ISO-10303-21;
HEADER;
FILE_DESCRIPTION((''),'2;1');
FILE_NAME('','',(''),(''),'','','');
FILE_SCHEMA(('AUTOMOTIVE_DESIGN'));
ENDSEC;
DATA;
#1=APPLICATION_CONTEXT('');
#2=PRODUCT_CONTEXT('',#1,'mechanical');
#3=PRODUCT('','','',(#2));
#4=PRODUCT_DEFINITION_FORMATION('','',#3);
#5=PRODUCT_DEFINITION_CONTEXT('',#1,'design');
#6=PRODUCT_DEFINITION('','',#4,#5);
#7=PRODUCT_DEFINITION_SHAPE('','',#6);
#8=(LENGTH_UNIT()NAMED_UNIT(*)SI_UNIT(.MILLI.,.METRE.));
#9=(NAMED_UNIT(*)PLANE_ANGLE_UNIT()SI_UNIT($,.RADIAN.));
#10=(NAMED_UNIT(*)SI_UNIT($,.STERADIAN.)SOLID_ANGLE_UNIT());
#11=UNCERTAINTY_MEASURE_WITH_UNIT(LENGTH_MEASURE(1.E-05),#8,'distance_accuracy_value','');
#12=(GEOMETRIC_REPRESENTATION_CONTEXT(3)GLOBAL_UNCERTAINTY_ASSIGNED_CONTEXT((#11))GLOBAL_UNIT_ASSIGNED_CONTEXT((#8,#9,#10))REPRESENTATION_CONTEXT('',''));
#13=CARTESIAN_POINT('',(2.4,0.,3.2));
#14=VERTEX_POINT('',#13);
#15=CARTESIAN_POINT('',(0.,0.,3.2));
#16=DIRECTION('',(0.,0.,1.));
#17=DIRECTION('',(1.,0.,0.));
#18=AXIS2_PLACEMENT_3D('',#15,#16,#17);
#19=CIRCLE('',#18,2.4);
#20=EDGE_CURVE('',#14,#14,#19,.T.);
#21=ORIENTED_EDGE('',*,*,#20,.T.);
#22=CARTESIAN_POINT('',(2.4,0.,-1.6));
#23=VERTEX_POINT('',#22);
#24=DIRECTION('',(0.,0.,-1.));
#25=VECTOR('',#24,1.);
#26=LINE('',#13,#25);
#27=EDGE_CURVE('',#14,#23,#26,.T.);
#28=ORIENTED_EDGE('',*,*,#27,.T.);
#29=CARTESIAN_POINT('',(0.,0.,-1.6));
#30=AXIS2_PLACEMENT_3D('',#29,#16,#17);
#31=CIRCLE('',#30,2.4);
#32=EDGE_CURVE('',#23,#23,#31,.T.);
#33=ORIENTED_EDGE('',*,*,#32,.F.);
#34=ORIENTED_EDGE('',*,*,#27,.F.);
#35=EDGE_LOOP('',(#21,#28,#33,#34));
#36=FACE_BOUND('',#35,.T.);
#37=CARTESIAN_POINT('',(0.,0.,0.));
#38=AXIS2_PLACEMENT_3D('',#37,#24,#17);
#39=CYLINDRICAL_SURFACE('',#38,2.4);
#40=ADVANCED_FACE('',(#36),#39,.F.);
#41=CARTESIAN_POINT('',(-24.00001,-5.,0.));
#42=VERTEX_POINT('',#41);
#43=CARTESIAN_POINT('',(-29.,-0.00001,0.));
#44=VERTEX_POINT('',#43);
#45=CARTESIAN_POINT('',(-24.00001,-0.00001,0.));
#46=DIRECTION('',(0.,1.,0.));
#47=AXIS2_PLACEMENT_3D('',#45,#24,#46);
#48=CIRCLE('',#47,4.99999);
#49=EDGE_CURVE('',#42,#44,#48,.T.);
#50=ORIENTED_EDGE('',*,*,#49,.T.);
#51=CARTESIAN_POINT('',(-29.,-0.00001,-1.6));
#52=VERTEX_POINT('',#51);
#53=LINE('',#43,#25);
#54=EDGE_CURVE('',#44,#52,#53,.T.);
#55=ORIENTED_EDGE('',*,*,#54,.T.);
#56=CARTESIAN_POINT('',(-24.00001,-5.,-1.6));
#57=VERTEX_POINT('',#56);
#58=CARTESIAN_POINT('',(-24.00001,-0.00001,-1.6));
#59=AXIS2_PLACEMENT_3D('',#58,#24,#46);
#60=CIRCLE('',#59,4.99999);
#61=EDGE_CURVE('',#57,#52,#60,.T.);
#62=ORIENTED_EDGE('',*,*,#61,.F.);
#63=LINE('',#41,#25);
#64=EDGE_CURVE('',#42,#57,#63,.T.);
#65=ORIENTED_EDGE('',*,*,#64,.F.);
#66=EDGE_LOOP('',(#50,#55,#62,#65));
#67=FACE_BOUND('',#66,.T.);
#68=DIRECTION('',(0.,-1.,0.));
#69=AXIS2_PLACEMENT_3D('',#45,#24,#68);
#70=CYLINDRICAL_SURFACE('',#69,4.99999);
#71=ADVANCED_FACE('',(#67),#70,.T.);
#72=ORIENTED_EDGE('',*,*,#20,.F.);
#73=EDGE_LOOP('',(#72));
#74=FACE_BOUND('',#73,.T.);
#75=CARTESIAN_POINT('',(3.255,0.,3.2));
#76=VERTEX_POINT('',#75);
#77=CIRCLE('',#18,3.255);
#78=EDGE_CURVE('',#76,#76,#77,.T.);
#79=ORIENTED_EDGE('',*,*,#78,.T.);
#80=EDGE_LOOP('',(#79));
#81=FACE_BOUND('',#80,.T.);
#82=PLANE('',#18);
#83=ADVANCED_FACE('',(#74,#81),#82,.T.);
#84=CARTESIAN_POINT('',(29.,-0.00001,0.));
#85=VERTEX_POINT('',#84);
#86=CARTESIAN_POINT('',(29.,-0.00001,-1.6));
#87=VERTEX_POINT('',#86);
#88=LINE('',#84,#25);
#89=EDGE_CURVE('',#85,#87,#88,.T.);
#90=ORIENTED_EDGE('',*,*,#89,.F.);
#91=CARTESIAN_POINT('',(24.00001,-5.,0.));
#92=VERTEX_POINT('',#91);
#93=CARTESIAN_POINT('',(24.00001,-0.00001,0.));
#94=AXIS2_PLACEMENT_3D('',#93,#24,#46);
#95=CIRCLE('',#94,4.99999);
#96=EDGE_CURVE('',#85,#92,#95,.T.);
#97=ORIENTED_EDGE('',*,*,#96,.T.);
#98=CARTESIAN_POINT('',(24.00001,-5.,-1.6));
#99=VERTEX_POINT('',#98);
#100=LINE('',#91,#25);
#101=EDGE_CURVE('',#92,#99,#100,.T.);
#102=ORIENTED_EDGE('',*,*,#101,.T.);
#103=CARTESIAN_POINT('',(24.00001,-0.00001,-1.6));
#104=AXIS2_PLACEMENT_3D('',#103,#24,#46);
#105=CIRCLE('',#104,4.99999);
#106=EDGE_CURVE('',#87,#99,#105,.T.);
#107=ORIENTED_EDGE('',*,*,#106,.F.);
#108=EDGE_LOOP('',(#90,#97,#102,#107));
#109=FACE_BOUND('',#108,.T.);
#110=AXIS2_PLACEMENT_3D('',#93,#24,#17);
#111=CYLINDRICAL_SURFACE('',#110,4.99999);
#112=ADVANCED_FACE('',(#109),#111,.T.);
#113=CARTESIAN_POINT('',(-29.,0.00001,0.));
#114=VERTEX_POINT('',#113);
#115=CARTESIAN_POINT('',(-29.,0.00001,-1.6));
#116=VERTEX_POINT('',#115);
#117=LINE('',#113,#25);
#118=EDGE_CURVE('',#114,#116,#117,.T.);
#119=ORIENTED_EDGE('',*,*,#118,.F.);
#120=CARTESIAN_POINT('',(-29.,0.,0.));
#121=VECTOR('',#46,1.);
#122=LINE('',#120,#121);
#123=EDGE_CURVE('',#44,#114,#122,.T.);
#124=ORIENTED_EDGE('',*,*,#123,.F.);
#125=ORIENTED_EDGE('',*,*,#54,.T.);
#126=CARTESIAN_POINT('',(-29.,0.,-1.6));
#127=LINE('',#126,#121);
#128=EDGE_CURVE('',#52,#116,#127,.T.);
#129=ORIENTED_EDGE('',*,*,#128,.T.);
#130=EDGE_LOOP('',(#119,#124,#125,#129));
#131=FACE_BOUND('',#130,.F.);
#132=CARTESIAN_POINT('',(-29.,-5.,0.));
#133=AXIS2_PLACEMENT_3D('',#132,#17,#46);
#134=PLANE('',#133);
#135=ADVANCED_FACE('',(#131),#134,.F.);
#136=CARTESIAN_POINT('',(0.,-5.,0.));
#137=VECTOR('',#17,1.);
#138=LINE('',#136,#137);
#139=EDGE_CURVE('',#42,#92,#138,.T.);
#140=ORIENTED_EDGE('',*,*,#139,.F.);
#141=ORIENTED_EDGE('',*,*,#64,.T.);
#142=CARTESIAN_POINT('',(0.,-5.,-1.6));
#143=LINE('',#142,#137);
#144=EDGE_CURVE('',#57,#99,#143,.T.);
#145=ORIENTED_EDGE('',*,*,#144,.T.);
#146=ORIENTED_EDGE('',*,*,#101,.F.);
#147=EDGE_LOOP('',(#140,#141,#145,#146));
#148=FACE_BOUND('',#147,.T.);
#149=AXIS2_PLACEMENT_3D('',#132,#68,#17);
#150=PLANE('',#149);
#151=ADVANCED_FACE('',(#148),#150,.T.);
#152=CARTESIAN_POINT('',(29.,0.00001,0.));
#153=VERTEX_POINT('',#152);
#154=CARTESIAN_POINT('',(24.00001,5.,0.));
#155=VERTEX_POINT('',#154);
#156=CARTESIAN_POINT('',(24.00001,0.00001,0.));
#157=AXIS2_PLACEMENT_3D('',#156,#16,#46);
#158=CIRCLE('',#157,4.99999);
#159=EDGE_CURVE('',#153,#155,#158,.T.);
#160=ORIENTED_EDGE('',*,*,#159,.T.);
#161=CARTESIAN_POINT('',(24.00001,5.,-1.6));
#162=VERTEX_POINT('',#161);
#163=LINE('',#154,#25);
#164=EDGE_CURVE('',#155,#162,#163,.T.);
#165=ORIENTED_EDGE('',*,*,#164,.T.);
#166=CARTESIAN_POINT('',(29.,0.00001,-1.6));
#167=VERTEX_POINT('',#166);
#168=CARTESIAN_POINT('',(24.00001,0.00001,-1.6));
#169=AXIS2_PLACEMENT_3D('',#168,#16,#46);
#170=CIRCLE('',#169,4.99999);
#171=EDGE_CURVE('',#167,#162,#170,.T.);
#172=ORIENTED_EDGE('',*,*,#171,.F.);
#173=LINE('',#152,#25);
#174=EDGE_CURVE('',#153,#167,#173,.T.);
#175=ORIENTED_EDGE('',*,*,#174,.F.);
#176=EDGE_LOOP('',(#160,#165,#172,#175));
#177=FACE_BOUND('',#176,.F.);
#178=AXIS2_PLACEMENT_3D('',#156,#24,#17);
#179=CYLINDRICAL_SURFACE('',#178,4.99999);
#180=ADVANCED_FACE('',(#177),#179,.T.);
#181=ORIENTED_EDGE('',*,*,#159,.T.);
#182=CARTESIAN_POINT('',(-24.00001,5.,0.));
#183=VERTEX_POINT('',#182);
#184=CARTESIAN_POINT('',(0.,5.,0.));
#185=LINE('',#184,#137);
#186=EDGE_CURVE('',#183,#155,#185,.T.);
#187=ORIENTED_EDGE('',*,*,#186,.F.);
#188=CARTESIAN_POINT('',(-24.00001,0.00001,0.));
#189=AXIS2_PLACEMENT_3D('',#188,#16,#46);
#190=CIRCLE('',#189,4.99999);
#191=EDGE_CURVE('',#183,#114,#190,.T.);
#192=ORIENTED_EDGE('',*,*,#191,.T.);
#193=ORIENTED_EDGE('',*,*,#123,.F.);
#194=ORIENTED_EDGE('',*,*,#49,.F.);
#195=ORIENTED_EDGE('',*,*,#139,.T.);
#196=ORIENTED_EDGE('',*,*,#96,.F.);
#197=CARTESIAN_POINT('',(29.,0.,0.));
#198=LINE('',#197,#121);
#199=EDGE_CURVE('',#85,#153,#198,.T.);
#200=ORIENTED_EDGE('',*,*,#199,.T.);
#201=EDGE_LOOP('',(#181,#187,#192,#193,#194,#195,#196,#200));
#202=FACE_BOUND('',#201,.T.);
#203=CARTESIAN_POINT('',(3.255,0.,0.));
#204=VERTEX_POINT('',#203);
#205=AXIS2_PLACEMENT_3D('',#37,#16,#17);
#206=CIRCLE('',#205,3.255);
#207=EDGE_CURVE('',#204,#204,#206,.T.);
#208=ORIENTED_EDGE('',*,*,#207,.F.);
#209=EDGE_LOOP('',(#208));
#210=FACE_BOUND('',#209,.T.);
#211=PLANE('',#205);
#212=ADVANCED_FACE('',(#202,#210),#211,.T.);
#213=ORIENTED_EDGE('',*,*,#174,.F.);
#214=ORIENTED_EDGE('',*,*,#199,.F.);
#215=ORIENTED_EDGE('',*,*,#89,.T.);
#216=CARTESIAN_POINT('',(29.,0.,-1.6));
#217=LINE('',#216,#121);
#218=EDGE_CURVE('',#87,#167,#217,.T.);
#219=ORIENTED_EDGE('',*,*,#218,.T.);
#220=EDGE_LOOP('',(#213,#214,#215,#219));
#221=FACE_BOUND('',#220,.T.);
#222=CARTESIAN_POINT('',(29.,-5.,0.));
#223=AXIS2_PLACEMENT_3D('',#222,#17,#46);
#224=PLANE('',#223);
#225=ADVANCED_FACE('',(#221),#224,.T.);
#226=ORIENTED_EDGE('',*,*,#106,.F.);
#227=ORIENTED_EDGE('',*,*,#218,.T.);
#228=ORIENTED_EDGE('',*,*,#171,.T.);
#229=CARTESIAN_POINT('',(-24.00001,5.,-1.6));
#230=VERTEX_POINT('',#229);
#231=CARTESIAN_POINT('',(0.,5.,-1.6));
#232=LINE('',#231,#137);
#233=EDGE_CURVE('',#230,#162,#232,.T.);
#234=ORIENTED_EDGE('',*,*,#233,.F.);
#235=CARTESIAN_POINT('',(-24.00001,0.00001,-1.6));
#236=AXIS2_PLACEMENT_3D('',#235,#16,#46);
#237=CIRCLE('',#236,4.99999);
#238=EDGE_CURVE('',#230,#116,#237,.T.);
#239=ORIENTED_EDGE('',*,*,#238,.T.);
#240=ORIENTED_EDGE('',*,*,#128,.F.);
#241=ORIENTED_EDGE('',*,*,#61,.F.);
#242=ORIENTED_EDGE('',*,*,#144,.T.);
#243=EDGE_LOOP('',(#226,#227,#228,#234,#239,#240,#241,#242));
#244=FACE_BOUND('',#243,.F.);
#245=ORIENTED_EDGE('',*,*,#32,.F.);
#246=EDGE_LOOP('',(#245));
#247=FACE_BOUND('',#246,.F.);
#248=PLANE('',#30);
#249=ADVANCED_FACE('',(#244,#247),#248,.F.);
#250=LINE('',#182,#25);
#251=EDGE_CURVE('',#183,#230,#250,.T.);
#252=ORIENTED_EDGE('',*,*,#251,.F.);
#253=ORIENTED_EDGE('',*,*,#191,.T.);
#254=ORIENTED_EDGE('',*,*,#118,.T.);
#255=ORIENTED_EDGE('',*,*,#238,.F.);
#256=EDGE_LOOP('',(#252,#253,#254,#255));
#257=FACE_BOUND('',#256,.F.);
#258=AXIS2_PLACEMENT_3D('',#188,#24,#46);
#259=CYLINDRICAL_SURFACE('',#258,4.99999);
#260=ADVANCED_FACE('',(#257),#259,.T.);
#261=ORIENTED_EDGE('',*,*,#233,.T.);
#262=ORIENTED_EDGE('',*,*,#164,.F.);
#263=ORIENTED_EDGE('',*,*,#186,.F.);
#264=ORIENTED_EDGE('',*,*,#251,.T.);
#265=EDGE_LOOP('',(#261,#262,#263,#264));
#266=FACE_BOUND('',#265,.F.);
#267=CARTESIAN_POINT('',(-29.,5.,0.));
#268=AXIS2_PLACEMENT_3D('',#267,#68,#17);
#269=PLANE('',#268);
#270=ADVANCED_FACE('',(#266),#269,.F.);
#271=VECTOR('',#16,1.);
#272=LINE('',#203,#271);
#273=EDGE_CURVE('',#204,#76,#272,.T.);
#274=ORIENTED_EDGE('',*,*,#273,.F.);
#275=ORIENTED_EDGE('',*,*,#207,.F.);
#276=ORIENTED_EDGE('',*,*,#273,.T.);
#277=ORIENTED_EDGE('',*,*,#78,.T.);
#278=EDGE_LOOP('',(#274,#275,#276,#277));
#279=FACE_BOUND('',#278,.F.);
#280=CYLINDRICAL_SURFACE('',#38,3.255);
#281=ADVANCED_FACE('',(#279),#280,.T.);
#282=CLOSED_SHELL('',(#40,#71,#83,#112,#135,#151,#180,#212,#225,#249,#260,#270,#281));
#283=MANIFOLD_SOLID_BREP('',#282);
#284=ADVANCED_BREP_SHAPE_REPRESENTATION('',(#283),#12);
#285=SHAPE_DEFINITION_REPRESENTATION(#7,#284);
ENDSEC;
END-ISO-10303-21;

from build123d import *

# Parameters (mm, degrees)
F0_W     = 58
F0_H     = 10
F0_R     = 2.4
F1_DEPTH = 1.6
F2_R     = 3.255
F2_R_2   = 2.4
F3_DEPTH = 3.2
F4_R     = 4.99999


# Not quite as in the source:
# - a fillet or chamfer is up to 0.001 mm smaller than in the source, because OpenCascade refuses the exact size


with BuildPart() as f1:
    # F0 (on Top) → F1 (new body)
    with BuildSketch(Plane.XY):
        Rectangle(F0_W, F0_H)
        Circle(F0_R, mode=Mode.SUBTRACT)
    extrude(amount=-F1_DEPTH)

    # F2 (on face) → F3 (join)
    with BuildSketch(Plane.XY):
        Circle(F2_R)
        Circle(F2_R_2, mode=Mode.SUBTRACT)
    extrude(amount=F3_DEPTH)

    # F4 (radius 5 in the source; OpenCascade refuses exactly that, so slightly less here)
    f4_edges = [f1.edges().sort_by_distance(p)[0] for p in [
        (29, 5, -0.8),
        (29, -5, -0.8),
        (-29, 5, -0.8),
        (-29, -5, -0.8),
    ]]
    fillet(f4_edges, radius=F4_R)


solid = f1.part
